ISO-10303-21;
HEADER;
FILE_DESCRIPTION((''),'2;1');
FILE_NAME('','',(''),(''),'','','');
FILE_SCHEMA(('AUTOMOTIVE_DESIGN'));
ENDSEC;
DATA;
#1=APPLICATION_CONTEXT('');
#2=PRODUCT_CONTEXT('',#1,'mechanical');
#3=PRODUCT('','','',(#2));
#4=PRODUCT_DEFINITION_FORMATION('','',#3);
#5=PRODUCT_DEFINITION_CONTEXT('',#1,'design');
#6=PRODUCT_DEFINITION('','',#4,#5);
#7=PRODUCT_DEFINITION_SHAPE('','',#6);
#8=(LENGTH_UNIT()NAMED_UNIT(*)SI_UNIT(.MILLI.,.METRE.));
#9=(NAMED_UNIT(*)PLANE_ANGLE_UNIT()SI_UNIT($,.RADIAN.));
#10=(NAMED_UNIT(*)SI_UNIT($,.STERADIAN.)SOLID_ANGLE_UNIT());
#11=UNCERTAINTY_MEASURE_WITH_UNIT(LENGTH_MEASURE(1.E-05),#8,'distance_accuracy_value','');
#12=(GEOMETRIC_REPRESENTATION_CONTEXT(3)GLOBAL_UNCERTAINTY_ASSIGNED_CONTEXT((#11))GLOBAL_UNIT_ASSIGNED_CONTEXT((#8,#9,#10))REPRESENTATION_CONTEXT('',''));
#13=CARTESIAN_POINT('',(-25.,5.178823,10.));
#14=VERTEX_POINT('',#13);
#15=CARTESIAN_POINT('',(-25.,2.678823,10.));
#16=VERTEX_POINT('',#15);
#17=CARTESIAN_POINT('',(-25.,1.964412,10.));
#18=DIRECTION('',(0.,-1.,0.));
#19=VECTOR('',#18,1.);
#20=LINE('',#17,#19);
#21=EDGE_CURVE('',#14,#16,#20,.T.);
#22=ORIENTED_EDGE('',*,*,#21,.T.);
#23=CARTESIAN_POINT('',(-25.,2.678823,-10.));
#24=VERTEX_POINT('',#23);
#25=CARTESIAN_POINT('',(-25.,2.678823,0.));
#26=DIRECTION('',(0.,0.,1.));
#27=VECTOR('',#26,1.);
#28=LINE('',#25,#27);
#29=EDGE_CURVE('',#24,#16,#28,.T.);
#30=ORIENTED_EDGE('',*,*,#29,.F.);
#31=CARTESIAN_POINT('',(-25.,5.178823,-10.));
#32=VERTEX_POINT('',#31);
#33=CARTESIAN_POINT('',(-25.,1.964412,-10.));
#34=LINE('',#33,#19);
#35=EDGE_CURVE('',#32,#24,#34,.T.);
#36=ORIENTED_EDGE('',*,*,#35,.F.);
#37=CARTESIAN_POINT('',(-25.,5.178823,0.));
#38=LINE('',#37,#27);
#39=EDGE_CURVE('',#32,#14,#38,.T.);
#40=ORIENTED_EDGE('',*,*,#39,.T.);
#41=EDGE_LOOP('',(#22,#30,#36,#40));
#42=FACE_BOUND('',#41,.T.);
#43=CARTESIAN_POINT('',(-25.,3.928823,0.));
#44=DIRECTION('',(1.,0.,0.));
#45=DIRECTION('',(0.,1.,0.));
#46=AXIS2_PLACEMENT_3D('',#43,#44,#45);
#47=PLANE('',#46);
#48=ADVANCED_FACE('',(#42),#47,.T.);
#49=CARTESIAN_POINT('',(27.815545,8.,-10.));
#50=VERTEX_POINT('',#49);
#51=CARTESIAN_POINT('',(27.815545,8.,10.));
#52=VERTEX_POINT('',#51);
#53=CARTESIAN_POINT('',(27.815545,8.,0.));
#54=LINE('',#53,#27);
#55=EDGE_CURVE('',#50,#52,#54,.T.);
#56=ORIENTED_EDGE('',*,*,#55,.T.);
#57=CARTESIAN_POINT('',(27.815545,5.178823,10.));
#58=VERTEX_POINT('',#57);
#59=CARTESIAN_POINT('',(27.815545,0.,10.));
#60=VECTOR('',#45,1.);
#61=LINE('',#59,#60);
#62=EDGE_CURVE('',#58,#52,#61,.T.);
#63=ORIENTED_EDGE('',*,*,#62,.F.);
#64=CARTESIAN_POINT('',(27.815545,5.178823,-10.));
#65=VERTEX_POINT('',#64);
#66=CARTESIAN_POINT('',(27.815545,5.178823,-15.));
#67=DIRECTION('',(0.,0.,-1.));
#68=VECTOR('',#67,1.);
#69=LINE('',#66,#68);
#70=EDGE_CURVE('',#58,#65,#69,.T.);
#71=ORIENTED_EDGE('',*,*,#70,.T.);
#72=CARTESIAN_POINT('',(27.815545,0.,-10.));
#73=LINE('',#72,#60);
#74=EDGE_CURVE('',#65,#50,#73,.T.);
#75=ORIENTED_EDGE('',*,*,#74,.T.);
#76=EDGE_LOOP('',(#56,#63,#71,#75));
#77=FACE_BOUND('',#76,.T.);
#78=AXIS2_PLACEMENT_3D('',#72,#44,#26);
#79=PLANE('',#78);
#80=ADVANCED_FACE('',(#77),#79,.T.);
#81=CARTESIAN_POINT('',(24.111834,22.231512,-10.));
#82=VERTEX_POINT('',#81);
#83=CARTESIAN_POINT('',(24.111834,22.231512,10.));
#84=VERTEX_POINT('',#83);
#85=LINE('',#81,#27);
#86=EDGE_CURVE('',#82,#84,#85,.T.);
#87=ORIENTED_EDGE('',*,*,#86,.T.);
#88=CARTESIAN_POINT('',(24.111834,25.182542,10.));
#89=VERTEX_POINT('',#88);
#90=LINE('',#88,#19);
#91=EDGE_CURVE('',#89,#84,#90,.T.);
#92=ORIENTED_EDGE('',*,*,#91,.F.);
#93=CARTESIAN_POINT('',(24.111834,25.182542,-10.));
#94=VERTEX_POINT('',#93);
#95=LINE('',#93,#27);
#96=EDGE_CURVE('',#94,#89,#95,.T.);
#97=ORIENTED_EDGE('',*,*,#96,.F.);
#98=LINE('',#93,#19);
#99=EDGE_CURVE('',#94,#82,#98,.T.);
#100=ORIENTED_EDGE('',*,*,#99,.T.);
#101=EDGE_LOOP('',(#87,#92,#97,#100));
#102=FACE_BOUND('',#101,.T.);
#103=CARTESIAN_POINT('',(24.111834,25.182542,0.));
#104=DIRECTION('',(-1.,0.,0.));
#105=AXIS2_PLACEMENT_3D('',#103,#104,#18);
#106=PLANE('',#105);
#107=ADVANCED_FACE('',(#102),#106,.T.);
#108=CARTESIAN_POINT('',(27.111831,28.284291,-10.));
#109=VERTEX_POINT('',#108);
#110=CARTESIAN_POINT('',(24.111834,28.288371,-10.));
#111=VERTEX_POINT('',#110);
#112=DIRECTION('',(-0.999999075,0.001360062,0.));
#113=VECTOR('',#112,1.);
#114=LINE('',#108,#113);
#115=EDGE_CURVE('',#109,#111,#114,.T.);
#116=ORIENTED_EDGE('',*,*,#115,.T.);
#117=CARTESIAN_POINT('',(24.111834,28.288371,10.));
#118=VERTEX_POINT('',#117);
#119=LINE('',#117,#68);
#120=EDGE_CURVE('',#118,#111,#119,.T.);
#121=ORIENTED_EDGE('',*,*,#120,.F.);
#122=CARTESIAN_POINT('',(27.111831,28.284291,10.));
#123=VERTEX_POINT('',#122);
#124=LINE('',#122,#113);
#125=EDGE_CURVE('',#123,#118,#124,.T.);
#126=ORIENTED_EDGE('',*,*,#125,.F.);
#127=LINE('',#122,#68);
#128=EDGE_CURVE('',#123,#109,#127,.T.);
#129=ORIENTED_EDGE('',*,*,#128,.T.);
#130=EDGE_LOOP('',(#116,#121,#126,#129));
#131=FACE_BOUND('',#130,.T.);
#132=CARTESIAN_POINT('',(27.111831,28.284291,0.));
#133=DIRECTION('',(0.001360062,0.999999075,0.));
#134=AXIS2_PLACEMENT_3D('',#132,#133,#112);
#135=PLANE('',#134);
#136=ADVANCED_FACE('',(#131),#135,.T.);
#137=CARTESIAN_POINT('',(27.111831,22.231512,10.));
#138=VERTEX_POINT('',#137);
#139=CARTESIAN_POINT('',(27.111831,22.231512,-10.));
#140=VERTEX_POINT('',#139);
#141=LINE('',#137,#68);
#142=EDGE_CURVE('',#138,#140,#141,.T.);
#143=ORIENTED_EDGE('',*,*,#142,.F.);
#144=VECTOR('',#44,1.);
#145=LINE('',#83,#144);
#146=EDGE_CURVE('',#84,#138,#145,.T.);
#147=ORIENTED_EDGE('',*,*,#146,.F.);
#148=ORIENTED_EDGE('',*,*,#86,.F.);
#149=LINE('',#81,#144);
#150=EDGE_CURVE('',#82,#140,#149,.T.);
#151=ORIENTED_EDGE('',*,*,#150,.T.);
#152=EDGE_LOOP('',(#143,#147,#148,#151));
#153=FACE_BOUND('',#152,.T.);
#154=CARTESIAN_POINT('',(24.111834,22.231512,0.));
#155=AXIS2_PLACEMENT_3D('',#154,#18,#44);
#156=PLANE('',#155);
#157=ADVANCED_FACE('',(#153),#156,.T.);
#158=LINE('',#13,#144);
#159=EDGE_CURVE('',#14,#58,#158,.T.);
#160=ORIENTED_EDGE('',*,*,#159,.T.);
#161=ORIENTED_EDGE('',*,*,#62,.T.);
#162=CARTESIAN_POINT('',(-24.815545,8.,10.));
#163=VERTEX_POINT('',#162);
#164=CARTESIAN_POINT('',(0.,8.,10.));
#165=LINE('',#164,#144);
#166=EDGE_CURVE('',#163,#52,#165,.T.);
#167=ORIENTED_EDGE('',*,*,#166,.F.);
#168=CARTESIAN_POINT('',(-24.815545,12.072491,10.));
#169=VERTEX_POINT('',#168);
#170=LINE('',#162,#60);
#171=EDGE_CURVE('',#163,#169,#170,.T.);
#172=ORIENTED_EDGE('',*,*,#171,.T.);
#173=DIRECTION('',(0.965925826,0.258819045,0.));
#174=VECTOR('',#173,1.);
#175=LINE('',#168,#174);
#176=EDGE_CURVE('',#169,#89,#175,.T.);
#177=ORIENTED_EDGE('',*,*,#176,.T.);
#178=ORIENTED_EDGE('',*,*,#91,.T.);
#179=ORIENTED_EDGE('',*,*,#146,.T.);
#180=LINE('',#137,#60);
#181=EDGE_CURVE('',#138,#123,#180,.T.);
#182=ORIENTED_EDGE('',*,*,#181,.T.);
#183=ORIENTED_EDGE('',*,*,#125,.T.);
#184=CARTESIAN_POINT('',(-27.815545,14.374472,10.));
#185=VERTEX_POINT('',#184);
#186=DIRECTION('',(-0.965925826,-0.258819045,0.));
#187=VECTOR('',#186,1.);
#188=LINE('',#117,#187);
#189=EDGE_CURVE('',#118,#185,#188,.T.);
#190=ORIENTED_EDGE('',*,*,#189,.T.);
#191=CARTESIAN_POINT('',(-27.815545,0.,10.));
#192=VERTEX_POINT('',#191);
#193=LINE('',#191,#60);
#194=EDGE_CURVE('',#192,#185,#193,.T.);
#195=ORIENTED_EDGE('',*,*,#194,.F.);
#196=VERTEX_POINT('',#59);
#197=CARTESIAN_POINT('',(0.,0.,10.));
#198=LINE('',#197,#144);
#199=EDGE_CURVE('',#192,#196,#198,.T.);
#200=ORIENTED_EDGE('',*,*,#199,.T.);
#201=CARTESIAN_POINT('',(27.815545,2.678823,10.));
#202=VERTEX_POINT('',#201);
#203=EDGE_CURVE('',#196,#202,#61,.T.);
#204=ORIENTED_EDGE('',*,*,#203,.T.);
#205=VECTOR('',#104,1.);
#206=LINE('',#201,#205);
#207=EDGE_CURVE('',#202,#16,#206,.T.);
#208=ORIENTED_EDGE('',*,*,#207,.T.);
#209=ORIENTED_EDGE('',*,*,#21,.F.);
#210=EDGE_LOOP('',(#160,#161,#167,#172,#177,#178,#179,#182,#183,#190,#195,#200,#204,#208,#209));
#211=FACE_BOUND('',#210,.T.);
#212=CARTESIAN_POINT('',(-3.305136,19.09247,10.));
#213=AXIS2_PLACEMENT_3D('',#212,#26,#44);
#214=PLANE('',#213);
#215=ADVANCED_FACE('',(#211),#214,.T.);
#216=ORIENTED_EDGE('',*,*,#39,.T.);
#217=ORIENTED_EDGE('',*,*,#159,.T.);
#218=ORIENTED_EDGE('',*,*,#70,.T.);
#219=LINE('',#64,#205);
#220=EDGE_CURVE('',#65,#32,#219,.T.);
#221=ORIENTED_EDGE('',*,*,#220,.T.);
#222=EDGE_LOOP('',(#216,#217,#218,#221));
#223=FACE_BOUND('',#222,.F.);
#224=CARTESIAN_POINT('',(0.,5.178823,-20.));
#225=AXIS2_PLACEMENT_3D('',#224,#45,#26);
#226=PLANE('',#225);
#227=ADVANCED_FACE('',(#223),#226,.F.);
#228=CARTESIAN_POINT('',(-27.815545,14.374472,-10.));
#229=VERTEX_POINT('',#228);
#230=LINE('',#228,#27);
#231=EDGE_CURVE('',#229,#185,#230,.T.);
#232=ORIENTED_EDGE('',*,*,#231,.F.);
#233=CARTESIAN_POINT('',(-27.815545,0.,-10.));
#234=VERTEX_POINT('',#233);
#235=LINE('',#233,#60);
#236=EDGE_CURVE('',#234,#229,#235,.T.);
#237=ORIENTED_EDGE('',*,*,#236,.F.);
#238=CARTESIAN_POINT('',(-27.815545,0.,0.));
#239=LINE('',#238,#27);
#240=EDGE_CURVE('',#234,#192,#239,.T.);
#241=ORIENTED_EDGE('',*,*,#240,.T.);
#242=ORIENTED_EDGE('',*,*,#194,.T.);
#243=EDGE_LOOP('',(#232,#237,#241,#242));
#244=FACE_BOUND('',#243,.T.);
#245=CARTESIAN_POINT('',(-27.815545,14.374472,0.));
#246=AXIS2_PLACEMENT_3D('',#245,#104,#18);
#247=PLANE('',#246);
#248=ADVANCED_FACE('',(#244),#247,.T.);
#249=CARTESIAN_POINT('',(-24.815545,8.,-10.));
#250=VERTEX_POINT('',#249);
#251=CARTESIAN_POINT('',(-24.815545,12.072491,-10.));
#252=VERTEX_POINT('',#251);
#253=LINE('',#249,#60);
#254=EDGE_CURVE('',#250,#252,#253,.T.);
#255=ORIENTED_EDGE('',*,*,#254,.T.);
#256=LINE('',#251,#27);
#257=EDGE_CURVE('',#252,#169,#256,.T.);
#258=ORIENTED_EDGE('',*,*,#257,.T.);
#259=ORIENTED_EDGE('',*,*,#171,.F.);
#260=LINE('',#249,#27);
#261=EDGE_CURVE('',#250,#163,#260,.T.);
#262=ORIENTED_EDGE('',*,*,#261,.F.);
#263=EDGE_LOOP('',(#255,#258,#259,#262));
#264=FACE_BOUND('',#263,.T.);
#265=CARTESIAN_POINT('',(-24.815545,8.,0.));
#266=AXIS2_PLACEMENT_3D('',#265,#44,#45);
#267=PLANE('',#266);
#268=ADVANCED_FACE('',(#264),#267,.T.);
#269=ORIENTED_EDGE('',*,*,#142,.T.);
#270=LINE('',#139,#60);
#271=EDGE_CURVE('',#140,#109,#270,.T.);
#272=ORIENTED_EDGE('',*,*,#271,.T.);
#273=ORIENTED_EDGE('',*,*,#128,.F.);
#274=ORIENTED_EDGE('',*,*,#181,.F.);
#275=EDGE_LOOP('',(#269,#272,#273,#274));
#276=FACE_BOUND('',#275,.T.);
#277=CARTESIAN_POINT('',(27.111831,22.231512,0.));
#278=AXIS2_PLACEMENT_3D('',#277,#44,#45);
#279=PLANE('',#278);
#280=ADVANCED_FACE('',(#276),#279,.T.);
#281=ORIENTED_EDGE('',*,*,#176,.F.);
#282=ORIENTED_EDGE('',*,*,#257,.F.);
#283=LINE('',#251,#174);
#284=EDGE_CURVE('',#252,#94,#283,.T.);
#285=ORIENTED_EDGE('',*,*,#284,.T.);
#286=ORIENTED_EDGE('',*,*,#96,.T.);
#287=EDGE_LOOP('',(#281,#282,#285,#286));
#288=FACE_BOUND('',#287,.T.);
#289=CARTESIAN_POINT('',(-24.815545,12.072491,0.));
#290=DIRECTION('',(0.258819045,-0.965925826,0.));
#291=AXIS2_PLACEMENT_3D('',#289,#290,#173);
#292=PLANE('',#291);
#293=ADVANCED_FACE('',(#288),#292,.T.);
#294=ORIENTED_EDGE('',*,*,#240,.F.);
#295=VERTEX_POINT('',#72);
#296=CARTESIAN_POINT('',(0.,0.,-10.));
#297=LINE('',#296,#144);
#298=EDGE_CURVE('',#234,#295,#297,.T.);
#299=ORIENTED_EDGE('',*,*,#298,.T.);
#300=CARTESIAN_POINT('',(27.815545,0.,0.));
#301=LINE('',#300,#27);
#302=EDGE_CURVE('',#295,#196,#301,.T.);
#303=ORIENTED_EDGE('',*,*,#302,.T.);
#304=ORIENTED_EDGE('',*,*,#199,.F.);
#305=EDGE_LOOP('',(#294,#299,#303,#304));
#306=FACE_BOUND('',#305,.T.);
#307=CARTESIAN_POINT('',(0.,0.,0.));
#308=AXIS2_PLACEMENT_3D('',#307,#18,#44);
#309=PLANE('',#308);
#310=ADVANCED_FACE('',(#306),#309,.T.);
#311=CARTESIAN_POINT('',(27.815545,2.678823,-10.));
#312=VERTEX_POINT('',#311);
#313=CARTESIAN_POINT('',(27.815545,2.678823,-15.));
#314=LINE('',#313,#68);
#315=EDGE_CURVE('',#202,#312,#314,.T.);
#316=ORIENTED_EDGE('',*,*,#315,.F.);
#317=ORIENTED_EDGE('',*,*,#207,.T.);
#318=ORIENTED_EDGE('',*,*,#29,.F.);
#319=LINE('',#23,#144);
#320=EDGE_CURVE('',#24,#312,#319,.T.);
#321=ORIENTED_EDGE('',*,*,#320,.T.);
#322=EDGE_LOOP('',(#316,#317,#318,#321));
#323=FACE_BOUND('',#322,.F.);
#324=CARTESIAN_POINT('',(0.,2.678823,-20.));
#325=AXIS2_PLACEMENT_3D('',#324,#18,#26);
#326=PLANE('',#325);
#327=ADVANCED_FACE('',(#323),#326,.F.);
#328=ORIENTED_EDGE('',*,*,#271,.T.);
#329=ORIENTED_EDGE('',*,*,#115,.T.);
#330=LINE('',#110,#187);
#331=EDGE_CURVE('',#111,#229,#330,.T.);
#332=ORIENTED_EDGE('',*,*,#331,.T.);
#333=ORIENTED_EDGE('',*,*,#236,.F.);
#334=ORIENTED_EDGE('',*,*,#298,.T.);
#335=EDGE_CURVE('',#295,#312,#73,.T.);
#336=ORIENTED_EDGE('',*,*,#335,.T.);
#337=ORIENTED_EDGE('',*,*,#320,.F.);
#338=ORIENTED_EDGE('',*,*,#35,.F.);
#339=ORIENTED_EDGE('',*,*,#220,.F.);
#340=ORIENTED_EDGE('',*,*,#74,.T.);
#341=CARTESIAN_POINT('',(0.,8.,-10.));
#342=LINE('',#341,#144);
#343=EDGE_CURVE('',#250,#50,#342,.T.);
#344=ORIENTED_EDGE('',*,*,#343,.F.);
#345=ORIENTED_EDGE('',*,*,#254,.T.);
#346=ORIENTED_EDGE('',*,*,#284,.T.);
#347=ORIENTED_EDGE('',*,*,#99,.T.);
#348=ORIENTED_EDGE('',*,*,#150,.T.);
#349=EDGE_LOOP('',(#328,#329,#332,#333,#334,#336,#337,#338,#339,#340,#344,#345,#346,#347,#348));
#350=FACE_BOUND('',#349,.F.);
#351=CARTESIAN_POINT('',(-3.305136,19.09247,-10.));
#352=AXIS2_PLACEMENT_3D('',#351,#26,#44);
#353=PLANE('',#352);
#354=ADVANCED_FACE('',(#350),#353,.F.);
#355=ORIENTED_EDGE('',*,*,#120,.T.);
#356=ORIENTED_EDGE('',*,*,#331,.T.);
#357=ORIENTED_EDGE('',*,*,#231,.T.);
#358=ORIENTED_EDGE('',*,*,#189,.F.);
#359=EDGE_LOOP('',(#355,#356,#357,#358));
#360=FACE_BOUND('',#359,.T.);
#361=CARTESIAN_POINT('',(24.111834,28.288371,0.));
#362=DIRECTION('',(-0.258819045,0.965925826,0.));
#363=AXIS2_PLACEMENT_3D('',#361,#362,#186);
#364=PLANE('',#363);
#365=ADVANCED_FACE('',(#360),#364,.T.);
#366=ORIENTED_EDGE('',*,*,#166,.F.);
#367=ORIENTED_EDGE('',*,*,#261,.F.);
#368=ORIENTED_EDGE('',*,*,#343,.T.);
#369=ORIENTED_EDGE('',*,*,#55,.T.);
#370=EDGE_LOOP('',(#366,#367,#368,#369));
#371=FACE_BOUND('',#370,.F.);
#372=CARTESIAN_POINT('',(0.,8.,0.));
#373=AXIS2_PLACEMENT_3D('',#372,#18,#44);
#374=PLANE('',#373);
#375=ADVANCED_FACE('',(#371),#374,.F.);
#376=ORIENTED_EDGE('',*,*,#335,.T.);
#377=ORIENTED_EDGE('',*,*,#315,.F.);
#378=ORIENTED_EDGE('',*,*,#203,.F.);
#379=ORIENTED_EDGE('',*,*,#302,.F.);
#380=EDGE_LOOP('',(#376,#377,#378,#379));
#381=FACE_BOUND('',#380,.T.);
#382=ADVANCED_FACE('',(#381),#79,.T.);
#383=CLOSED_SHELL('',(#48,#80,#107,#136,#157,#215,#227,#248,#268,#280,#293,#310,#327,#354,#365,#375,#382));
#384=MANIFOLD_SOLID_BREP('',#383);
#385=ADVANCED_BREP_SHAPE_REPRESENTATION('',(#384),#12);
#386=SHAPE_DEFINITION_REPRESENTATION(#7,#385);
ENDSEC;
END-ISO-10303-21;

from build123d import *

# Parameters (mm, degrees)
F0_W          = 55.6310900272
F0_H          = 20
F1_DEPTH      = 8
F2_W          = 2.5
F2_H          = 40
F3_DEPTH      = 27.8165450136
F3_DEPTH_BACK = 25
F5_DEPTH      = 10


# Not quite as in the source:
# - a feature names something its author has since deleted; it is built from what else it names


with BuildPart() as f1:
    # F0 (on Front) → F1 (new body)
    with BuildSketch(Plane.XZ):
        Rectangle(F0_W, F0_H)
    extrude(amount=-F1_DEPTH)

    # F2 (on Right) → F3 (cut, two sides)
    with BuildSketch(Plane.YZ) as f3_sk:
        with Locations((3.9288233686, 0)):
            Rectangle(F2_W, F2_H)
    extrude(amount=F3_DEPTH, mode=Mode.SUBTRACT)
    extrude(f3_sk.sketch, amount=-F3_DEPTH_BACK, mode=Mode.SUBTRACT)

    # F4 (on Top) → F5 (join, symmetric)
    with BuildSketch(Plane.XY):
        Polygon((24.1118337571, 28.2883709489), (-27.8155450136, 14.3744717422), (-27.8155450136, 8), (-24.8155450136, 8), (-24.8155450136, 12.0724907783), (24.1118337571, 25.1825424077), align=None)
        Polygon((27.1118309825, 28.2842907635), (24.1118337571, 28.2883709489), (24.1118337571, 25.1825424077), (24.1118337571, 22.2315117717), (27.1118309825, 22.2315117717), align=None)
    extrude(amount=F5_DEPTH, both=True)


solid = f1.part
